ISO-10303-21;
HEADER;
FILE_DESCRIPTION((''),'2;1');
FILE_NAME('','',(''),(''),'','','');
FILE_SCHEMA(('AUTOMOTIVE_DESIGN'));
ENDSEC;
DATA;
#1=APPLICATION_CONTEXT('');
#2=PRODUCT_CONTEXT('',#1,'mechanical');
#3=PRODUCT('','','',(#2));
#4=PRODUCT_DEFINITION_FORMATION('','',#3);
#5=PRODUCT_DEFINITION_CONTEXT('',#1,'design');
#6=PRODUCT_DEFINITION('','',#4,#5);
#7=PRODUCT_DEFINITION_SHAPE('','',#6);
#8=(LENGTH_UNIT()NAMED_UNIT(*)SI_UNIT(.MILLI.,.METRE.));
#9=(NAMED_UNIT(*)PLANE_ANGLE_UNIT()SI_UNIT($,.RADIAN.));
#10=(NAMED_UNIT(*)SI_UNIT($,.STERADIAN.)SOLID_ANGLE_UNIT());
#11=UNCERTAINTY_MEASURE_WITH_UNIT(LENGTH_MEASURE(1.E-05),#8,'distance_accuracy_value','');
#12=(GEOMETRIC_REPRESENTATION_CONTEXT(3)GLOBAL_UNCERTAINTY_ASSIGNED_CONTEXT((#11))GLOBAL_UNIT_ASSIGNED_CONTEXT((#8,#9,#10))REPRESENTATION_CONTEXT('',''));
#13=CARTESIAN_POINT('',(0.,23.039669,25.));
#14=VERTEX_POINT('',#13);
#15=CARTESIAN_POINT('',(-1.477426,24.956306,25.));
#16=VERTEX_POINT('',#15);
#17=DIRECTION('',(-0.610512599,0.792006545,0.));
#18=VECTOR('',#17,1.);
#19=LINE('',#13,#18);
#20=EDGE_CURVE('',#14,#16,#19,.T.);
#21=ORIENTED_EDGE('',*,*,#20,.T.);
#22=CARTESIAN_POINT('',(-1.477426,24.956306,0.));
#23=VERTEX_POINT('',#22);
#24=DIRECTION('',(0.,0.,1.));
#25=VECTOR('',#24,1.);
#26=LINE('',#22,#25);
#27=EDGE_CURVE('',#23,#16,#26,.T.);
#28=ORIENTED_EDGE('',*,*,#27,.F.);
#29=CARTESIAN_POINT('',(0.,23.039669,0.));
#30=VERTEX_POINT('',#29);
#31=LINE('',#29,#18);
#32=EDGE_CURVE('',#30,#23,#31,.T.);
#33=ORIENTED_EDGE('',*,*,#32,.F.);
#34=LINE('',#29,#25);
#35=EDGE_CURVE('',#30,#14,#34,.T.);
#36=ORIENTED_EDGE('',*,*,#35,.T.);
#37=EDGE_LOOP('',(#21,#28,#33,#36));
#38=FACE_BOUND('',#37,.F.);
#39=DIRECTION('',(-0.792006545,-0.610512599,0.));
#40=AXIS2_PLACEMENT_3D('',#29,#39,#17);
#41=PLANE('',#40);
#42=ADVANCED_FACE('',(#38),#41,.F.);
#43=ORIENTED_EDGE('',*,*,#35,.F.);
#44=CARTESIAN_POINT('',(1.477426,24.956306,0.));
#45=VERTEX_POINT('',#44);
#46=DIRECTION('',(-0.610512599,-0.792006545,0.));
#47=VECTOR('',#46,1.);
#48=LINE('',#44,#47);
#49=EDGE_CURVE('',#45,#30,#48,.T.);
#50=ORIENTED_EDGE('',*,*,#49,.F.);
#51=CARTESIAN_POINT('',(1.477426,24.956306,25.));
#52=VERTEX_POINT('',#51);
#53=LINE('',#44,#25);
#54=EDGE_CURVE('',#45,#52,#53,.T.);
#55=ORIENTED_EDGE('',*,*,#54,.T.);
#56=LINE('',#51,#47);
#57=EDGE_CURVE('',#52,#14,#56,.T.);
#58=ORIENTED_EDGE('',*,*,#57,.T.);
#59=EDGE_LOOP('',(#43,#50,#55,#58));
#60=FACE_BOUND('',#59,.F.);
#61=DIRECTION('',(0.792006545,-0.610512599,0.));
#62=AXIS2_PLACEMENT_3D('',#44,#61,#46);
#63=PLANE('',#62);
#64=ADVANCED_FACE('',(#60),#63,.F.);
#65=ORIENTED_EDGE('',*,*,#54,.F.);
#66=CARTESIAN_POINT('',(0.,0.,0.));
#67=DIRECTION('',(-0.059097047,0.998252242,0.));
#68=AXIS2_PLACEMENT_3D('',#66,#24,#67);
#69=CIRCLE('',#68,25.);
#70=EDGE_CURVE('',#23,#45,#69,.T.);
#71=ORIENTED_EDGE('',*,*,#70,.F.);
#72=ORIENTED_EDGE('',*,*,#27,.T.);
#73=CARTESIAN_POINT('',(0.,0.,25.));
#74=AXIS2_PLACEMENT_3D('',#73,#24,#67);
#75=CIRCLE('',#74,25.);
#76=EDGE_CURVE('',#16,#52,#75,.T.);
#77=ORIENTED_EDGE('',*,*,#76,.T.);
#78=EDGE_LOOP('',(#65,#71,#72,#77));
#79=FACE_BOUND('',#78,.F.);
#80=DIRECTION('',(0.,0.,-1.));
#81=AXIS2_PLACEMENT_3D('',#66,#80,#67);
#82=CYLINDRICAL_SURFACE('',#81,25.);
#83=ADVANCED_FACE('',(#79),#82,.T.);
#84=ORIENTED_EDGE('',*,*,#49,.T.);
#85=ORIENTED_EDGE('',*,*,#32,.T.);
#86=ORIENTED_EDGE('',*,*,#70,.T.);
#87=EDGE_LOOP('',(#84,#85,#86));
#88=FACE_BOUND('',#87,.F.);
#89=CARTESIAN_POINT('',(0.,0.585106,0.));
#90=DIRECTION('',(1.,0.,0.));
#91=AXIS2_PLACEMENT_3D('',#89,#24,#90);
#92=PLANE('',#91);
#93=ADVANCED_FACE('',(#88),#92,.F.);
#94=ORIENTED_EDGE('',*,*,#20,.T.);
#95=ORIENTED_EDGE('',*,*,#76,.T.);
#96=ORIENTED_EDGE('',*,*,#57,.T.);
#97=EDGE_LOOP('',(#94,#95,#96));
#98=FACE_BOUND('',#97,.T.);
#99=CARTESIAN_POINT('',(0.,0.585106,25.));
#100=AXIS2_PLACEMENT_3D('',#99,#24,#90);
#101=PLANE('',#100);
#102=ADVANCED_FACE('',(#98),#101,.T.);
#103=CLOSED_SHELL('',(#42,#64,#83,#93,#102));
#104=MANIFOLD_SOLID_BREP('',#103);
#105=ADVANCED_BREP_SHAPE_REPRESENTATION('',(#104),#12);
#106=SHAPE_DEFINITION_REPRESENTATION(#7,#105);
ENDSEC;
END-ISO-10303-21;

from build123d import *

# Parameters (mm, degrees)
F1_DEPTH = 25
F2_DEPTH = 30


with BuildPart() as f1:
    # F0 (on Top) → F1 (new body)
    with BuildSketch(Plane.XY):
        with BuildLine():
            ThreePointArc((-1.477426165, 24.9563060553), (-17.1473663557, -18.1925211849), (25, 0))
            ThreePointArc((25, 0), (18.1925211849, 17.1473663557), (1.477426165, 24.9563060553))
            Line((1.477426165, 24.9563060553), (0, 23.0396687984))
            Line((0, 23.0396687984), (-1.477426165, 24.9563060553))
        make_face()
    extrude(amount=F1_DEPTH)

    # F0 (on Top) → F2 (cut)
    with BuildSketch(Plane.XY):
        with BuildLine():
            ThreePointArc((0, 25), (-0.7390360671, 24.9890741263), (-1.477426165, 24.9563060553))
            Line((-1.477426165, 24.9563060553), (0, 23.0396687984))
            Line((0, 23.0396687984), (0, 25))
        make_face()
        with BuildLine():
            Line((0, 23.0396687984), (1.477426165, 24.9563060553))
            ThreePointArc((1.477426165, 24.9563060553), (0.7390360671, 24.9890741263), (0, 25))
            Line((0, 25), (0, 23.0396687984))
        make_face()
    extrude(amount=F2_DEPTH, mode=Mode.SUBTRACT)


solid = f1.part
